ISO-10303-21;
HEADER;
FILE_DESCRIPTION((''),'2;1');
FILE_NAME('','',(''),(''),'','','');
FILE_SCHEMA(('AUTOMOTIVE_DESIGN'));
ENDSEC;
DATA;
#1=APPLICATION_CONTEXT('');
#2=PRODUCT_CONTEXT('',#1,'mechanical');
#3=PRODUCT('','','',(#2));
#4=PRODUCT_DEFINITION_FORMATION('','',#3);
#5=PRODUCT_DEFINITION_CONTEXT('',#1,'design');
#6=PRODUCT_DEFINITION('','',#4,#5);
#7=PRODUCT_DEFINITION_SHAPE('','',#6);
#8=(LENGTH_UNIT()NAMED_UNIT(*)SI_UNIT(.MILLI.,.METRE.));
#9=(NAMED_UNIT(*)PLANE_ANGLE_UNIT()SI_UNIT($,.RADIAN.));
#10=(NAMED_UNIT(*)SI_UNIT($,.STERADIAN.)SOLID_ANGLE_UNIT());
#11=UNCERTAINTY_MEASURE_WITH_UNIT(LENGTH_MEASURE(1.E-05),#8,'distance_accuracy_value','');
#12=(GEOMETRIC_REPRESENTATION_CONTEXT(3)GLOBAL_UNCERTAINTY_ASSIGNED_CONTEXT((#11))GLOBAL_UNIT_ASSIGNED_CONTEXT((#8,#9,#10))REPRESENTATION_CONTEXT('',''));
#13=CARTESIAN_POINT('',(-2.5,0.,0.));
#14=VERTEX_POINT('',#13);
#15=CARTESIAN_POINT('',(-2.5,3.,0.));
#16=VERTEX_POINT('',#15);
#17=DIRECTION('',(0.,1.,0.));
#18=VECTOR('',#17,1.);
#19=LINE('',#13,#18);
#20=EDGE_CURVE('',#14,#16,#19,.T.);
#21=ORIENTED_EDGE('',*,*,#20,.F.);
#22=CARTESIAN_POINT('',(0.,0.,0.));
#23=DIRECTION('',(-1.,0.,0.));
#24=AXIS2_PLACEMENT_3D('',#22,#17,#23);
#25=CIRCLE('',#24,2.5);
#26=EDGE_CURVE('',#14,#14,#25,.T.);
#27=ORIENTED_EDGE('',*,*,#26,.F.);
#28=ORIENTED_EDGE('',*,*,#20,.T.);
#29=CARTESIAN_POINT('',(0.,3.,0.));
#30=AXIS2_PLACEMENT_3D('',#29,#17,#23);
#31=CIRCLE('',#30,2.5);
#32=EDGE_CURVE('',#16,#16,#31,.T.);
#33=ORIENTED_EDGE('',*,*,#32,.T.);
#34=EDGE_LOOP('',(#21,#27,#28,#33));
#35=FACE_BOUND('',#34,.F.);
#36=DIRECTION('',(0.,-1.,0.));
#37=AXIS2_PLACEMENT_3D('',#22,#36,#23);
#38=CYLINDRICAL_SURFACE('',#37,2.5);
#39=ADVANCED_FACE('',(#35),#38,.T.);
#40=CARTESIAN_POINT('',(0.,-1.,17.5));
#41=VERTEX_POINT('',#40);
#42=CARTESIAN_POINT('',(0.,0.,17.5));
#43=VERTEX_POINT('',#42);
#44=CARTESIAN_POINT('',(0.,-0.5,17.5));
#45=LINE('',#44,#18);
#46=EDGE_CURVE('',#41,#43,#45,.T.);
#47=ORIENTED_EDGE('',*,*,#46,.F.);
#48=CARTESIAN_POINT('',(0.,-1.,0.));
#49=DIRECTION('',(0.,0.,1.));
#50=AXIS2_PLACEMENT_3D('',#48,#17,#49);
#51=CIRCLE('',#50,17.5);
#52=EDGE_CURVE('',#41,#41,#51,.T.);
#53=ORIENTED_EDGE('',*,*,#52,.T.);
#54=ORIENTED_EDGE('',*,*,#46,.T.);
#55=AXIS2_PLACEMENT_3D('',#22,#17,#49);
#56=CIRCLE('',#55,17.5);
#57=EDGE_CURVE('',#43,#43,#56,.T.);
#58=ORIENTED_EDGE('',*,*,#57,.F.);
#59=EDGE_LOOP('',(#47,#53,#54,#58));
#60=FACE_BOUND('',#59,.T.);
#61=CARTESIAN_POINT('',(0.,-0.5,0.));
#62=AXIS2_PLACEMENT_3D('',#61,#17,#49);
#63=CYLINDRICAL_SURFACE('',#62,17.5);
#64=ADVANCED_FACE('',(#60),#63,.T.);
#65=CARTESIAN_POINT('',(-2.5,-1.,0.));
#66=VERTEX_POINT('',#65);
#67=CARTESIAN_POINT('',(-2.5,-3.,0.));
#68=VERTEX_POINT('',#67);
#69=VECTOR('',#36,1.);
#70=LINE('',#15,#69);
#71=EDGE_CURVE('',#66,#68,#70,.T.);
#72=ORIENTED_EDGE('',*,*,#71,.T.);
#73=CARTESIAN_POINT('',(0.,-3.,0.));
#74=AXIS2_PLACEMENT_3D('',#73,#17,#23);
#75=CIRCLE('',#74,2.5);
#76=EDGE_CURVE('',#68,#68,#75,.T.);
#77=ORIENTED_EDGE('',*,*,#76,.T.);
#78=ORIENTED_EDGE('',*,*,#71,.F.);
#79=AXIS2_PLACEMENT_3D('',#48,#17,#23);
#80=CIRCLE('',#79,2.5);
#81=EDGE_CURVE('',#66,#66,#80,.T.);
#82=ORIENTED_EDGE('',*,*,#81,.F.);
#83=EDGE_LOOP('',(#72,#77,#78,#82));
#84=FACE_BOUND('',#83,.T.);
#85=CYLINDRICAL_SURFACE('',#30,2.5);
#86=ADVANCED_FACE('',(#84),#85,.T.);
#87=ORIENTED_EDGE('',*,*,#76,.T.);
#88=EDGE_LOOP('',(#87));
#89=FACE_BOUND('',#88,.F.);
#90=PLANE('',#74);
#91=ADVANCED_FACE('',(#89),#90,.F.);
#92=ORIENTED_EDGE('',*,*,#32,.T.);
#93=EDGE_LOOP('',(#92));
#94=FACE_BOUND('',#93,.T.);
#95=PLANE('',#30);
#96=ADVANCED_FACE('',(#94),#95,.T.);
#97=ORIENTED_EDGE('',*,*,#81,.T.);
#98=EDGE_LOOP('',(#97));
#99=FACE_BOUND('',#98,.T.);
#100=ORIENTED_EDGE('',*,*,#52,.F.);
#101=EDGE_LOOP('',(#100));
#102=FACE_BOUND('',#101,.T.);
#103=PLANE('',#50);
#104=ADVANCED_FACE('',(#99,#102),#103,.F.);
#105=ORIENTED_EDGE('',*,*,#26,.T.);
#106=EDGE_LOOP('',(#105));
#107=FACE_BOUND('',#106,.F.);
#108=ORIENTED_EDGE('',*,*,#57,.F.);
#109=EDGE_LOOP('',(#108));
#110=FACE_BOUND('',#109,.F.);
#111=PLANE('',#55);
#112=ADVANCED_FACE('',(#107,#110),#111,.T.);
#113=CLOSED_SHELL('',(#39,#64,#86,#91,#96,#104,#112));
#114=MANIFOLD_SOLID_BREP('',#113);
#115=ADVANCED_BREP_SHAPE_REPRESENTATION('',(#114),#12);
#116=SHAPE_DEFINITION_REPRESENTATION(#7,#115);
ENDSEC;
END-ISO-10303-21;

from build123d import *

# Parameters (mm, degrees)
F0_W     = 1
F0_H     = 17.5
F2_R     = 2.5
F3_DEPTH = 3
F4_DEPTH = 6


with BuildPart() as f1:
    # F0 (on Right) → F1 (revolve)
    with BuildSketch(Plane.YZ):
        with Locations((-0.5, 8.75)):
            Rectangle(F0_W, F0_H)
    revolve(axis=Axis((0, -0.5, 0), (0, 1, 0)))

    # F2 (on face) → F3 (join)
    with BuildSketch(Plane(origin=(0, 0, 0), x_dir=(-1, 0, 0), z_dir=(0, 1, 0))):
        Circle(F2_R)
    extrude(amount=F3_DEPTH)

    # F4 (add): a face of the model
    f4_faces = [f1.faces().sort_by_distance(p)[0] for p in [
        (0, 3, 0),
    ]]
    extrude(f4_faces, amount=-F4_DEPTH)


solid = f1.part
